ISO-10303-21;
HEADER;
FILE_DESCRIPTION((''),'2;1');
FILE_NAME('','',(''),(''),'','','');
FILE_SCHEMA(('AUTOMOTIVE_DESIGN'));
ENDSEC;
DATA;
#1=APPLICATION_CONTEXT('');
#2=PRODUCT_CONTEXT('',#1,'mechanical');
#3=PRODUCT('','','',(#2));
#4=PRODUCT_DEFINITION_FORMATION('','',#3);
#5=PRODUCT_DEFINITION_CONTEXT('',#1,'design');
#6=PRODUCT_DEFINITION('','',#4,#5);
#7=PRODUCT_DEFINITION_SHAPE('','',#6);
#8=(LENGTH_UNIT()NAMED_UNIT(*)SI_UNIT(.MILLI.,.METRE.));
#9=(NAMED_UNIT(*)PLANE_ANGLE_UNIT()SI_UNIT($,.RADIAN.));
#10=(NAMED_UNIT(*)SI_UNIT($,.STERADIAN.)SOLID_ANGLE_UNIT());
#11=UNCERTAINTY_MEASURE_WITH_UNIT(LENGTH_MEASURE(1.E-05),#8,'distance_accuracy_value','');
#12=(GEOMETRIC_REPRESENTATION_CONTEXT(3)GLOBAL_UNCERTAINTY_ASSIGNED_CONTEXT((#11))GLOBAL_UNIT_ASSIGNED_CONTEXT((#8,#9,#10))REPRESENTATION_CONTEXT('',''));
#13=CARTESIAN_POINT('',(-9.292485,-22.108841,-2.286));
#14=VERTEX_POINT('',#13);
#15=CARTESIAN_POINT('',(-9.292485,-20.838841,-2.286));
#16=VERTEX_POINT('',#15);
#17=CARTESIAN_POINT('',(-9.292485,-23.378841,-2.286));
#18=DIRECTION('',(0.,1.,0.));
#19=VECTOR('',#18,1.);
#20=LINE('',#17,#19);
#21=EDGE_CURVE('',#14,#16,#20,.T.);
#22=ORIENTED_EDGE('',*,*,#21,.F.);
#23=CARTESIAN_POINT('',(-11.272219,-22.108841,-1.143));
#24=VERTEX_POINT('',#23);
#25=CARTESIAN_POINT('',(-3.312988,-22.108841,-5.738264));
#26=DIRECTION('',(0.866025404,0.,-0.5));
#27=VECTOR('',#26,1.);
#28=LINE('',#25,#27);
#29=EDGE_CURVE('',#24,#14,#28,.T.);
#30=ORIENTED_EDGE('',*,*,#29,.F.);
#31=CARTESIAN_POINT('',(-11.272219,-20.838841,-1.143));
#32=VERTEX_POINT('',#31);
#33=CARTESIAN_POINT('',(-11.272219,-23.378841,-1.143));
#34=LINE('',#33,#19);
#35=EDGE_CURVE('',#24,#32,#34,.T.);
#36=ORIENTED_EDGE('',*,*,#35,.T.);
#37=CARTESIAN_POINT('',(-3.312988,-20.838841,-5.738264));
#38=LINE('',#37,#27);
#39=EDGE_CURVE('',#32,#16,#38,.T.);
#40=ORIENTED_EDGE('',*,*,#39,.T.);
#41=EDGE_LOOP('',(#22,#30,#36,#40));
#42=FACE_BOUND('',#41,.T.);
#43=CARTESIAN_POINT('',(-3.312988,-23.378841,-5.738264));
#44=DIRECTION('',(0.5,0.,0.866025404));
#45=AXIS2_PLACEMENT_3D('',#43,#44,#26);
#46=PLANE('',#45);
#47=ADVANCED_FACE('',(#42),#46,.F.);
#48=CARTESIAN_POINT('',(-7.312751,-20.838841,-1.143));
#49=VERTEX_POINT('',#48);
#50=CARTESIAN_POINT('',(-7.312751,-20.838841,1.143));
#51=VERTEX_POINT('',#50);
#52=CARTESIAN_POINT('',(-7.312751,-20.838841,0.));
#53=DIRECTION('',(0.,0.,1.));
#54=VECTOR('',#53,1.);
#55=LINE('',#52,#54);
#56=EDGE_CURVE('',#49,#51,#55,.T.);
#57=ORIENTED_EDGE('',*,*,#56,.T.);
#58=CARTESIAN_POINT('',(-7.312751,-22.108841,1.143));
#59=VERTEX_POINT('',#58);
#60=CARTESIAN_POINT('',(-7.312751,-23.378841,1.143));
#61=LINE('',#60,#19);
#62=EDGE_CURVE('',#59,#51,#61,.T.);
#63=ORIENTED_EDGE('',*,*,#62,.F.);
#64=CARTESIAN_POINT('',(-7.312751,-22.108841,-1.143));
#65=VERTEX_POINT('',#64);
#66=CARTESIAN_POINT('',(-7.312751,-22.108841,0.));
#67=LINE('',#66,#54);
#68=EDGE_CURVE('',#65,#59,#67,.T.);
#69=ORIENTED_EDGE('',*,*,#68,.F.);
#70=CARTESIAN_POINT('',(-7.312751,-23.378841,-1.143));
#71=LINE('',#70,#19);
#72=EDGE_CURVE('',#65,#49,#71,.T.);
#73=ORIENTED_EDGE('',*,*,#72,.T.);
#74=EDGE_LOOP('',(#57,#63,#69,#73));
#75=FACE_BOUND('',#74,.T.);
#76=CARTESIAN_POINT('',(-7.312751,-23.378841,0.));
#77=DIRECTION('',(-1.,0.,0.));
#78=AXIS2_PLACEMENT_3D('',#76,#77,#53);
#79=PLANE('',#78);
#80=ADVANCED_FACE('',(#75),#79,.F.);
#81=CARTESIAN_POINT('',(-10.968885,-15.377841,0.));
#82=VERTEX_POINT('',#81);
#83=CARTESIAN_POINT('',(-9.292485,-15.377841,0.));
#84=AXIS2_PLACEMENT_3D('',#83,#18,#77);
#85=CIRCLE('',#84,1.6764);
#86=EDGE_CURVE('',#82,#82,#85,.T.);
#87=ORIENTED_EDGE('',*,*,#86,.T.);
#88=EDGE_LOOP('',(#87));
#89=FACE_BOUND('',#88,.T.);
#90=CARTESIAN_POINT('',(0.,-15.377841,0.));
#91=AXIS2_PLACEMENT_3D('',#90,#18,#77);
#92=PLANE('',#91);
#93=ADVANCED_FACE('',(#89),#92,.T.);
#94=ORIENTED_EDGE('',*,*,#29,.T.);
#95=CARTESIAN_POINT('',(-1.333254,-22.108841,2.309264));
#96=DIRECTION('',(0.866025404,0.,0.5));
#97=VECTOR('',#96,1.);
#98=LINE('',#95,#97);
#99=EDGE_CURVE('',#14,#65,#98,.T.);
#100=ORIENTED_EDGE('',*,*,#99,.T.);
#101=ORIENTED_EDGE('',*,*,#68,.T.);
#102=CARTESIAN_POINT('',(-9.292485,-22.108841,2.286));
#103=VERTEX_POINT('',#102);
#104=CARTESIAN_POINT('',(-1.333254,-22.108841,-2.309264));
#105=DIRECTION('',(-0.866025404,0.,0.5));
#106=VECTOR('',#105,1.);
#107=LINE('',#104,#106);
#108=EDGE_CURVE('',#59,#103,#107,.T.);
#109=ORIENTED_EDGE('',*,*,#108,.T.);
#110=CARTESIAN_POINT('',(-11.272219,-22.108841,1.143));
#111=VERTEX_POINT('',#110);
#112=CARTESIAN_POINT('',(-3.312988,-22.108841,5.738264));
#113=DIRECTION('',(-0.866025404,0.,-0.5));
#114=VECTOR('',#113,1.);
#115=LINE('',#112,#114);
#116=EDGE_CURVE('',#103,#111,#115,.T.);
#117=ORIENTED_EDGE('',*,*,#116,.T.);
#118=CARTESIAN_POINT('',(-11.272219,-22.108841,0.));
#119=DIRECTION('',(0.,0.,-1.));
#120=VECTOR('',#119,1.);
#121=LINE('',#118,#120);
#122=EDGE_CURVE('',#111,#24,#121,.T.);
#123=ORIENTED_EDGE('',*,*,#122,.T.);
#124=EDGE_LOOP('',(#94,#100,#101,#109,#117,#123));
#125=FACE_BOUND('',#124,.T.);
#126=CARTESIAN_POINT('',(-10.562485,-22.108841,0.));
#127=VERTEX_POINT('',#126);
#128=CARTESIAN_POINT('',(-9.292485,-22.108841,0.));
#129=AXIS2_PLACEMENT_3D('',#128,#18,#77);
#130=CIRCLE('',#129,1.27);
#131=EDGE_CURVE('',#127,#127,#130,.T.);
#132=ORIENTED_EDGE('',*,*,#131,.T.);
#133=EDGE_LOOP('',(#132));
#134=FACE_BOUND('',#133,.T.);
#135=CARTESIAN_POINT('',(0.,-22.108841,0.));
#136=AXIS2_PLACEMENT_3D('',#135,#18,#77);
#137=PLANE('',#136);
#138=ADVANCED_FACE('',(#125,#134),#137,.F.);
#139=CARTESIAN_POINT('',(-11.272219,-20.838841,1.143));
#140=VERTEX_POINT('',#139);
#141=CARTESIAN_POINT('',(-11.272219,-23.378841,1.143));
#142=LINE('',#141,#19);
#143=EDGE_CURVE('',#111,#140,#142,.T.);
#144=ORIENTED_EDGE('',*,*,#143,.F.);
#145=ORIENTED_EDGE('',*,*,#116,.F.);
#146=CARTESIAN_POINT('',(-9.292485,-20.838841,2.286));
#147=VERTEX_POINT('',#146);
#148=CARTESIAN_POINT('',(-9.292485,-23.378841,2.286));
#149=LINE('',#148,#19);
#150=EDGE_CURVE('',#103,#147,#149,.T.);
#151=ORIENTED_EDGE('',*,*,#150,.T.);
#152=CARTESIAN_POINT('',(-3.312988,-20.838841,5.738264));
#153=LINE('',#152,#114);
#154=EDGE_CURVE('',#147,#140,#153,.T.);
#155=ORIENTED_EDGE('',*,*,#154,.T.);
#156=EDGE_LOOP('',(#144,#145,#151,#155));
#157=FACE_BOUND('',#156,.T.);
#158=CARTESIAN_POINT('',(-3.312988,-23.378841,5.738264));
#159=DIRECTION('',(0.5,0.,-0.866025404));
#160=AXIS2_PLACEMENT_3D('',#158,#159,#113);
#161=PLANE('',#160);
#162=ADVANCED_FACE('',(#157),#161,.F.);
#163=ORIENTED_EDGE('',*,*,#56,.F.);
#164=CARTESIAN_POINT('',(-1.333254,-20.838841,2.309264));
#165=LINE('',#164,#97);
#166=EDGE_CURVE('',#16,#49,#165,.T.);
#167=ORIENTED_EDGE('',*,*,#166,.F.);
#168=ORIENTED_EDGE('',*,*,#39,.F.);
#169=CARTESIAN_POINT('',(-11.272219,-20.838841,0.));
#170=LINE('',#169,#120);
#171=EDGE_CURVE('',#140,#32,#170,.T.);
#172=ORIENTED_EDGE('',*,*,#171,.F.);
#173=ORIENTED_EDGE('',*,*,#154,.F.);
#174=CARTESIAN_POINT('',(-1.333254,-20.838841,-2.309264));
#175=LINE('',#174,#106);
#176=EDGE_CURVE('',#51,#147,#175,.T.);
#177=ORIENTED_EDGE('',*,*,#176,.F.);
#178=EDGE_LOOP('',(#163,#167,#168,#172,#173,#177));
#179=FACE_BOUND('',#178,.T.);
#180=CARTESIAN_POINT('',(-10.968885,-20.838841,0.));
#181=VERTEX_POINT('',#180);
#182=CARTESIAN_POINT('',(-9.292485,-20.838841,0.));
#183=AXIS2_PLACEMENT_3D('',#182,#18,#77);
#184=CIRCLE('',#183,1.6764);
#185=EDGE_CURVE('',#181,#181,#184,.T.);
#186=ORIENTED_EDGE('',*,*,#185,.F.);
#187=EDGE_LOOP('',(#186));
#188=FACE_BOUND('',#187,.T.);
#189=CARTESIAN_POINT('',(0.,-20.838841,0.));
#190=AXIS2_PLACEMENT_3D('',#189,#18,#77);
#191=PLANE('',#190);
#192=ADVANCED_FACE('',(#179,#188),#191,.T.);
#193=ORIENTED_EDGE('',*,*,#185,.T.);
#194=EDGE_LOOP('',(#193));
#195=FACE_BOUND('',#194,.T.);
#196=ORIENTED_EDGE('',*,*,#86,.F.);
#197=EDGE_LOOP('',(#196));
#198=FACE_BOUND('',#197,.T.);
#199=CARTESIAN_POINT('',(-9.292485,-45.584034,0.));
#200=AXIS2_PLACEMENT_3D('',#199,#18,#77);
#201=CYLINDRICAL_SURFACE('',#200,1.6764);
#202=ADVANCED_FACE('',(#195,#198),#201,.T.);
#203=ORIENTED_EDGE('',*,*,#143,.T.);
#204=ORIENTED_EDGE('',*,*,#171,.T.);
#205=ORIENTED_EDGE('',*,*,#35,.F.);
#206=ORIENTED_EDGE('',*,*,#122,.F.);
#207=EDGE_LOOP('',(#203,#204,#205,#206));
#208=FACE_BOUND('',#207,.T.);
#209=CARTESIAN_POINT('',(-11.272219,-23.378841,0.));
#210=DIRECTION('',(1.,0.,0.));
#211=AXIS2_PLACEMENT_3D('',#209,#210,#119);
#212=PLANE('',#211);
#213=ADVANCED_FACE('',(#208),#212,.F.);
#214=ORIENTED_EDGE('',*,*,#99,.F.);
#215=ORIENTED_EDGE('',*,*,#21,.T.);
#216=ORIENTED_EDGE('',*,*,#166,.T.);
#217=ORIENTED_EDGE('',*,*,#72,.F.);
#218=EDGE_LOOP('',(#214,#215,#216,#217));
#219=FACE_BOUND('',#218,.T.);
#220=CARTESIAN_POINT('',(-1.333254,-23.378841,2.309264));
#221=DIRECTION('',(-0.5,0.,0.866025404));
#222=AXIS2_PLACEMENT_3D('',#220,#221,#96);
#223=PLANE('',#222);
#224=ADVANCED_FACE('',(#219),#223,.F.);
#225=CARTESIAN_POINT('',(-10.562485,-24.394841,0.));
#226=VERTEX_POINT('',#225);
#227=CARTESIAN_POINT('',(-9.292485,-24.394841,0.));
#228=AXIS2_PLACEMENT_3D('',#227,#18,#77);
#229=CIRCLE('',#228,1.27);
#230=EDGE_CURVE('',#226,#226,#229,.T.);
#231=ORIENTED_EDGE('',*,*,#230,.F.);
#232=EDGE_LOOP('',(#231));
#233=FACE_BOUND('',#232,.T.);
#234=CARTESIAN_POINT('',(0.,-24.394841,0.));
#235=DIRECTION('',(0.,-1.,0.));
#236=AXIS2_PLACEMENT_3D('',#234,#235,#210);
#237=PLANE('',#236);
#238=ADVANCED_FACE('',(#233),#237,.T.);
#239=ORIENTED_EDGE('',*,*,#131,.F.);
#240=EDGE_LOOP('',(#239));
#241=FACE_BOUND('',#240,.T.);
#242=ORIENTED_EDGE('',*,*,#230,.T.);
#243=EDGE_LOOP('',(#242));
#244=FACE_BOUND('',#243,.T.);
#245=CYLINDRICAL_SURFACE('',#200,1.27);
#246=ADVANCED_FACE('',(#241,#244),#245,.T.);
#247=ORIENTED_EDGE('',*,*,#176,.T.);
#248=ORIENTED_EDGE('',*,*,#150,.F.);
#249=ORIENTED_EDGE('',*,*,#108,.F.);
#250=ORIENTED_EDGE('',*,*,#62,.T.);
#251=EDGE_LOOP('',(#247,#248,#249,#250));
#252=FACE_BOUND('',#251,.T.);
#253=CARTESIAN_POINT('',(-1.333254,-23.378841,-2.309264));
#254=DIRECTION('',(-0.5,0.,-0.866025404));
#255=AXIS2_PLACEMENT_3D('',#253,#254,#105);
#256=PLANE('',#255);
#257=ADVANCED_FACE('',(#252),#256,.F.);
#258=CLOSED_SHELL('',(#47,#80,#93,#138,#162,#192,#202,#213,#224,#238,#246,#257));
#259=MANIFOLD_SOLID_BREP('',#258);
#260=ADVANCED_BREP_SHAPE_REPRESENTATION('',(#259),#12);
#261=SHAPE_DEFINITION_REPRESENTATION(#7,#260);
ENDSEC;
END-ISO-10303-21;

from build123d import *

# Parameters (mm, degrees)
SKETCH2_R          = 3.048
CUT_EXTRUDE1_DEPTH = 2.54


# Read off the part's stored shape, not the designer's step: Revolve1
with BuildPart() as part:
    # Revolve1 outline → Revolve1 (revolve)
    with BuildSketch(Plane(origin=(-9.292485091, 0, 0), x_dir=(1, 0, 0), z_dir=(0, 0, 1))):
        Polygon((0, -15.377840902), (0, -24.394840902), (1.27, -24.394840902), (1.27, -22.108840902), (3.048, -22.108840902), (3.048, -20.838840902), (1.6764, -20.838840902), (1.6764, -15.377840902), align=None)
    revolve(axis=Axis((-9.292485091, 0, 0), (0, 1, 0)))

    # Sketch2 → Cut-Extrude1 (cut)
    with BuildSketch(Plane(origin=(0, -20.838840902, 0), x_dir=(1, 0, 0), z_dir=(0, 1, 0))):
        with Locations((-9.292485091, 0)):
            Circle(SKETCH2_R)
        Polygon((-9.292485091, 2.286), (-7.312751018, 1.143), (-7.312751018, -1.143), (-9.292485091, -2.286), (-11.272219164, -1.143), (-11.272219164, 1.143), align=None, mode=Mode.SUBTRACT)
    extrude(amount=-CUT_EXTRUDE1_DEPTH, mode=Mode.SUBTRACT)


solid = part.part
